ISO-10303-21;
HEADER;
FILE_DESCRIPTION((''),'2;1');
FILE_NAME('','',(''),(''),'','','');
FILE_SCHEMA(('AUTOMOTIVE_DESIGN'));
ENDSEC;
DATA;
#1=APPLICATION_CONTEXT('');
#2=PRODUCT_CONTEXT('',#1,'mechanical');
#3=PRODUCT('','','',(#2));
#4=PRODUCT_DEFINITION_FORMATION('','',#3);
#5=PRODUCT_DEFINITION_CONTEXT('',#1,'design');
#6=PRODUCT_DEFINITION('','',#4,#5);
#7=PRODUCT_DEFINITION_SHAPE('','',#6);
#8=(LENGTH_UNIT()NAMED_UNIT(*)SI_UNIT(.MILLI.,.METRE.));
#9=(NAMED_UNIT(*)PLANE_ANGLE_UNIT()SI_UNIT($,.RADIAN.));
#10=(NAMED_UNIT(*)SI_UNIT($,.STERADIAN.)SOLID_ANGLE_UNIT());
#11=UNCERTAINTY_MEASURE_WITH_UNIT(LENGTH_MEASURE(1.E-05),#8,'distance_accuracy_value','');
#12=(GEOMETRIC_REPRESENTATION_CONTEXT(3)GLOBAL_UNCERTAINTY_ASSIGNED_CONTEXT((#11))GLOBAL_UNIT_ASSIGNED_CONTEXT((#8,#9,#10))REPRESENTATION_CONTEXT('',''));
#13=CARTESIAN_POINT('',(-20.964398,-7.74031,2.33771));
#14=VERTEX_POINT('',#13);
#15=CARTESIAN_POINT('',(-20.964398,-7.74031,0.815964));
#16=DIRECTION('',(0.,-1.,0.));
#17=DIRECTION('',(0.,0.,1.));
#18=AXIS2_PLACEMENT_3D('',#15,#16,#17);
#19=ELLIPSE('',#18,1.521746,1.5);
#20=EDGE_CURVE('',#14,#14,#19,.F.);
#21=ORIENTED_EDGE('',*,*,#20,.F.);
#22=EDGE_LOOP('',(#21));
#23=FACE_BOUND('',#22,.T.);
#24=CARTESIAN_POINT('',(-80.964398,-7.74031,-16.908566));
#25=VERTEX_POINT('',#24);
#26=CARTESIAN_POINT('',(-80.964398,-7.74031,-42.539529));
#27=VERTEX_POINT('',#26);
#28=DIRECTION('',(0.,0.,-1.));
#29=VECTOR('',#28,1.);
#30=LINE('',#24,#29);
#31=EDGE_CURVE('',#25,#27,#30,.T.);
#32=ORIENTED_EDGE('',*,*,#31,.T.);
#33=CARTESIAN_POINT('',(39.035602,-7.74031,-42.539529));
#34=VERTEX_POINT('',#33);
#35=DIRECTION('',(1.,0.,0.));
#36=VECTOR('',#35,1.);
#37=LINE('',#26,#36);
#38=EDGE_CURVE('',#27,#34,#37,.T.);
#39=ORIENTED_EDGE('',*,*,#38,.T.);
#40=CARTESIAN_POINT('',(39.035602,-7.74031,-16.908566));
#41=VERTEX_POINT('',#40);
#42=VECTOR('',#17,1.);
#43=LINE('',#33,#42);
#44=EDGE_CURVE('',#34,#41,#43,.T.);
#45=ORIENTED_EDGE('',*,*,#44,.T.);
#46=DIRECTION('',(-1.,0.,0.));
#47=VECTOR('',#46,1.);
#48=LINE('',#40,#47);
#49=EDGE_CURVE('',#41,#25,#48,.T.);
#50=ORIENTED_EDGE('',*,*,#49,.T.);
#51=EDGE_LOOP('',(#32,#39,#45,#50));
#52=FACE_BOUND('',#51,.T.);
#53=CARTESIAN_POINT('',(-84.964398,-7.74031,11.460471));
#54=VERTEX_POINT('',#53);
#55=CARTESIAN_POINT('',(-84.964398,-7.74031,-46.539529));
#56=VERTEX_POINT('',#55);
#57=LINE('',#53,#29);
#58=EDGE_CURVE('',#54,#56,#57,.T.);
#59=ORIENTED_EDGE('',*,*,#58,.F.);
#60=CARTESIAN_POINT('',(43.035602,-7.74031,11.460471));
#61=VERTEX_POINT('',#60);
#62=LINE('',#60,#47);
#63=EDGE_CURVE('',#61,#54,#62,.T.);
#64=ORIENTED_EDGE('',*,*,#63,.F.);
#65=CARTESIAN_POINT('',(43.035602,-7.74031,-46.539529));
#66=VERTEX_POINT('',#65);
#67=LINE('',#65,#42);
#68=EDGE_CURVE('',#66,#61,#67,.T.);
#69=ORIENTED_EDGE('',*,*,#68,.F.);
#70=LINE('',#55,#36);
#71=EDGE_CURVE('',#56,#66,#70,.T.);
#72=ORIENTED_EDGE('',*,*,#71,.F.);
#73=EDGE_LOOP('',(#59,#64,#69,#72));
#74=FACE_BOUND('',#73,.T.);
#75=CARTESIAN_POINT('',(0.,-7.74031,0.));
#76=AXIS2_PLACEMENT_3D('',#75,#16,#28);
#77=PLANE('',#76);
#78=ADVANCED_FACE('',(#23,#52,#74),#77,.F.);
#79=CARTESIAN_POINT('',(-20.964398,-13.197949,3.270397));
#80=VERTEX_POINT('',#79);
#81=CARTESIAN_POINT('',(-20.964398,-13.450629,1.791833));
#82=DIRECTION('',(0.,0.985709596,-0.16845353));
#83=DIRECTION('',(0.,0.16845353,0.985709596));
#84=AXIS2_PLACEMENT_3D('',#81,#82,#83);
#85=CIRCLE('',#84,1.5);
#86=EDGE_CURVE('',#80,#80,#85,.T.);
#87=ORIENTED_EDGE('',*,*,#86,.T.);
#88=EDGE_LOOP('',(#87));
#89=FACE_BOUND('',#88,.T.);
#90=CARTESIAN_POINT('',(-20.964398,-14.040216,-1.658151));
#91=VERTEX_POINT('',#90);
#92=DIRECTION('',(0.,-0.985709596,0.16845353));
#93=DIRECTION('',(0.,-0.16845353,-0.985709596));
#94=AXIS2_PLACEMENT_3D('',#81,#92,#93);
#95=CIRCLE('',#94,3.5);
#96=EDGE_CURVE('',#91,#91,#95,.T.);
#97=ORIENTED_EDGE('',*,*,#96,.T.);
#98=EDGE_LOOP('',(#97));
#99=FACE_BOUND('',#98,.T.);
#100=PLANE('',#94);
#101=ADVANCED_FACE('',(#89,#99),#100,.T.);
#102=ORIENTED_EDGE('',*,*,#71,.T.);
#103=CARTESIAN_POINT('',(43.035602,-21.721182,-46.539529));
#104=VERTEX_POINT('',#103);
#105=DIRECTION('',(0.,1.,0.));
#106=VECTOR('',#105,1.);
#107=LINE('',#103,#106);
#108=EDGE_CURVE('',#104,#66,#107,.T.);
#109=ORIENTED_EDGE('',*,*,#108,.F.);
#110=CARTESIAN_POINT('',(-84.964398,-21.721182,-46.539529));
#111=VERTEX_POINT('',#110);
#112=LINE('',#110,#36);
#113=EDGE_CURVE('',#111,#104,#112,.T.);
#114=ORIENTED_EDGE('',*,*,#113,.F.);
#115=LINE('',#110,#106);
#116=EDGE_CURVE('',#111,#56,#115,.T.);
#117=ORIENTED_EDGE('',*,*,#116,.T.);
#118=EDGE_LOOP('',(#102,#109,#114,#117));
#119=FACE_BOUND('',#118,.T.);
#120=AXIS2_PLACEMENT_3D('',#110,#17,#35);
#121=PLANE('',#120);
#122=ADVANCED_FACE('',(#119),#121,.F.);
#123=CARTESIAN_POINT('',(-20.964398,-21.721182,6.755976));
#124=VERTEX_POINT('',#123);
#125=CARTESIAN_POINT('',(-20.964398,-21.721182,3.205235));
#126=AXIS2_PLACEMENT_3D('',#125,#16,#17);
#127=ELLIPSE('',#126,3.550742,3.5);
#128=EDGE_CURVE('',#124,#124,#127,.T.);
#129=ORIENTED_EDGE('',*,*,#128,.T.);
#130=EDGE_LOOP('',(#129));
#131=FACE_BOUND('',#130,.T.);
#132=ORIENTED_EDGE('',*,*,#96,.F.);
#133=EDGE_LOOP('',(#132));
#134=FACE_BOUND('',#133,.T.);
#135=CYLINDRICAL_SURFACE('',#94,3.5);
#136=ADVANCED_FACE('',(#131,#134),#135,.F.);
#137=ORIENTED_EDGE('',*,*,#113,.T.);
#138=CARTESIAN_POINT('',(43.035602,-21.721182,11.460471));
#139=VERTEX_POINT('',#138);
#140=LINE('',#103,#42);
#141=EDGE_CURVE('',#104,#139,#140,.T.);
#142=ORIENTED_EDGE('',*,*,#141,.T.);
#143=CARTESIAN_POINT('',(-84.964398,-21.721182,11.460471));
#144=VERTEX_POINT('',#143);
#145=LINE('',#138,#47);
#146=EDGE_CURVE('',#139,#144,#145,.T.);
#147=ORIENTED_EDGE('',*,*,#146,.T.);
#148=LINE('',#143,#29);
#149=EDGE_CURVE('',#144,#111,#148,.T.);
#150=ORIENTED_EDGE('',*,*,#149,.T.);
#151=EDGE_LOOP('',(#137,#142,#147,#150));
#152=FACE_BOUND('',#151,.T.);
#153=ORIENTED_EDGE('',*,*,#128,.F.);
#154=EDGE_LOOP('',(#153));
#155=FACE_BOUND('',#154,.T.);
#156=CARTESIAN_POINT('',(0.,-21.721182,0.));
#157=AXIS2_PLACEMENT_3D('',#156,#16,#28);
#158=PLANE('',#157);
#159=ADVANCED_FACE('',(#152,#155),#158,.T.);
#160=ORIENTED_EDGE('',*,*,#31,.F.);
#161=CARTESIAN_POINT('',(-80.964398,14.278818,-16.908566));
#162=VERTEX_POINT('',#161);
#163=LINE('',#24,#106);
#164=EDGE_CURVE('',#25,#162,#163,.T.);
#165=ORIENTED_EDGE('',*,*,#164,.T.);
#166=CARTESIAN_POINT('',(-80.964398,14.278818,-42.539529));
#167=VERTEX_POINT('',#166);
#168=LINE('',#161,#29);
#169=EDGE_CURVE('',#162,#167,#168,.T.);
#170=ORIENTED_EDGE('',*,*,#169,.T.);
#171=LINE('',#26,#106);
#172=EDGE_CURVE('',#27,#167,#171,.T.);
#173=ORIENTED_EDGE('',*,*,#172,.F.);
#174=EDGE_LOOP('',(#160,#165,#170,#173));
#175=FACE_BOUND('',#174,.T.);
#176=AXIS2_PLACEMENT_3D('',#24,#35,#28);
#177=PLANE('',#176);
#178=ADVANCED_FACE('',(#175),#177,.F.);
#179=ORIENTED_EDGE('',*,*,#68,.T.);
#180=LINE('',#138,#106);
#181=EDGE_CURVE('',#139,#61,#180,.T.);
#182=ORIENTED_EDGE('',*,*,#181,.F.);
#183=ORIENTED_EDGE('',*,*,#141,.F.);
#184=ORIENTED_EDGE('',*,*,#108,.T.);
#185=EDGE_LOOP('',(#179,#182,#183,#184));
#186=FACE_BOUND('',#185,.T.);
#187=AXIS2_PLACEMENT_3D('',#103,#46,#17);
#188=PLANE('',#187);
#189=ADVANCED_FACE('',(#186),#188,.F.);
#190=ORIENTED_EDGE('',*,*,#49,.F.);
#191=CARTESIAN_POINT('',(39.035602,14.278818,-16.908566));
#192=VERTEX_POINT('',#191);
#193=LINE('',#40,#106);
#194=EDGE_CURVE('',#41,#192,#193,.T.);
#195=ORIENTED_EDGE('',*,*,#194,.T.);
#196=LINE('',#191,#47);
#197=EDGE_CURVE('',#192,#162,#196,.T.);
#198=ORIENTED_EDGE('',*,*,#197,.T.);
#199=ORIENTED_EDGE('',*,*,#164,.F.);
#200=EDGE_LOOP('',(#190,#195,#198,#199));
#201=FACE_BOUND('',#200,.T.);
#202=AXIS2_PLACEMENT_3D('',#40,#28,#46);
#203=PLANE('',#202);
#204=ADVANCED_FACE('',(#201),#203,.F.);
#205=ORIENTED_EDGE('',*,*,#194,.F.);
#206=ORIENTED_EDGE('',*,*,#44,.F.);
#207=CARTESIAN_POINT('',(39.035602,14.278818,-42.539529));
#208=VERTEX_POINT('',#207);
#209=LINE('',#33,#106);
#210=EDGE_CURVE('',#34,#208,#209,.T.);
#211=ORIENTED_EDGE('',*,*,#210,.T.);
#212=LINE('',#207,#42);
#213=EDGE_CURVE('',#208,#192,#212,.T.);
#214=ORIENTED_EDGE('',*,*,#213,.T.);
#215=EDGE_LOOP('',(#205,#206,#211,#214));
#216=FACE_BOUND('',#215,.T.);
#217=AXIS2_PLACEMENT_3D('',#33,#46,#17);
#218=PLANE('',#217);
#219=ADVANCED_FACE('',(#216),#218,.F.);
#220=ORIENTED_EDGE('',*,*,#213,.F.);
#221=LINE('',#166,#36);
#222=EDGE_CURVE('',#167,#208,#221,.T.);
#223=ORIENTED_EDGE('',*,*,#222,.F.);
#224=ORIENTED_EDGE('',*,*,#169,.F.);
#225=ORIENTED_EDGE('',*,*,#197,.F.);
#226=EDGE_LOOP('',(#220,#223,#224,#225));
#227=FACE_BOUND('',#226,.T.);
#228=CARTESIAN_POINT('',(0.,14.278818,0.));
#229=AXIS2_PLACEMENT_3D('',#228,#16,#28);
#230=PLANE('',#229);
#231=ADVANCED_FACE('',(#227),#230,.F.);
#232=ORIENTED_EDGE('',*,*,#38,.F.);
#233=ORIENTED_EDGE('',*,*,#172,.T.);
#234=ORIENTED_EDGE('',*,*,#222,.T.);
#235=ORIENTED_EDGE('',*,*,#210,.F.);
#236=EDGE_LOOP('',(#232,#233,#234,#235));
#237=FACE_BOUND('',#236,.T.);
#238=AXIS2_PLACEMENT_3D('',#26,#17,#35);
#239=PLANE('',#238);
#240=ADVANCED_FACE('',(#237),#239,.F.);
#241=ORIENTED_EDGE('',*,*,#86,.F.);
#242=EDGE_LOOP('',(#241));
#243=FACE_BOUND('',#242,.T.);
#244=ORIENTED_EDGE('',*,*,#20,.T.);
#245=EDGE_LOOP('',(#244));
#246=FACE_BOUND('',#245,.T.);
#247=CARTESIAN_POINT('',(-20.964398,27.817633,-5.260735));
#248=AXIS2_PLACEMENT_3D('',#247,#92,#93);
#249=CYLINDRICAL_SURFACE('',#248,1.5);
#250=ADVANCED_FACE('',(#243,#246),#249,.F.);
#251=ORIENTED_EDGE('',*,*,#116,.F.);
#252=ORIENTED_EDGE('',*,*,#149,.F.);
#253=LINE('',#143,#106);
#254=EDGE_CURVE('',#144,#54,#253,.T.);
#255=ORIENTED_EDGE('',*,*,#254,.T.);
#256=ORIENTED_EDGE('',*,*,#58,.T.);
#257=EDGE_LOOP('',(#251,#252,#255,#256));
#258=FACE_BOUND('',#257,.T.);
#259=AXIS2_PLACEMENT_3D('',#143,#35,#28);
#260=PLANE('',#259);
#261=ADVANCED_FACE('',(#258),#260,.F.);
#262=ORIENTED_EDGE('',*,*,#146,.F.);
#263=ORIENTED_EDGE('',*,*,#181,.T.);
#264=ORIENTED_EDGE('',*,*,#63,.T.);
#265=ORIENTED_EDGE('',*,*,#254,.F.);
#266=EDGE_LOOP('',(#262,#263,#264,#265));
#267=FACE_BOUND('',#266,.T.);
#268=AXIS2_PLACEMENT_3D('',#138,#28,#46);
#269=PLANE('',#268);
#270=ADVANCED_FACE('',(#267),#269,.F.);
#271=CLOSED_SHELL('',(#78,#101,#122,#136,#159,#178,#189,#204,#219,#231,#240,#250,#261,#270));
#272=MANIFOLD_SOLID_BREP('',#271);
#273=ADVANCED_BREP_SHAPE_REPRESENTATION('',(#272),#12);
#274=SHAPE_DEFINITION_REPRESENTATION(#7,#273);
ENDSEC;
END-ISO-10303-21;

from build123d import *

# Parameters (mm, degrees)
SKETCH1_W           = 120
SKETCH1_H           = 25.630963903
BOSS_EXTRUDE1_DEPTH = 22.019128
SKETCH2_W           = 128
SKETCH2_H           = 58
BOSS_EXTRUDE2_DEPTH = 13.980872
CAVITY1_START       = -22.548845462
CAVITY1_OUTLINE_R   = 3.5
CAVITY1_DEPTH       = 8.988590673
CAVITY1_START_2     = -13.560254789
CAVITY1_2_OUTLINE_R = 1.5
CAVITY1_2_DEPTH     = 6.049448343


# Read off the part's stored shape, not the designer's step: Cavity1
with BuildPart() as part:
    # Sketch1 → Boss-Extrude1 (new body)
    with BuildSketch(Plane.XZ.offset(-14.278818257)):
        with Locations((-20.964398438, -29.724047508)):
            Rectangle(SKETCH1_W, SKETCH1_H)
    extrude(amount=BOSS_EXTRUDE1_DEPTH)


with BuildPart() as boss_extrude2_tool:
    # Sketch2 → Boss-Extrude2 (new body)
    with BuildSketch(Plane.XZ.offset(7.740310225)):
        with Locations((-20.964398438, -17.53952946)):
            Rectangle(SKETCH2_W, SKETCH2_H)
    extrude(amount=BOSS_EXTRUDE2_DEPTH)


with BuildPart() as part_1:
    add(part.part)


with BuildPart() as part_2:
    # Boss-Extrude2: joined with boss_extrude2_tool
    add(part_1.part.fuse(boss_extrude2_tool.part, tol=0.00001))

    # Cavity1 outline → Cavity1 (cut)
    with BuildSketch(Plane(origin=(0, 0, 0), x_dir=(1, 0, 0), z_dir=(0, 0.9857095962326692, -0.16845353037211303)).offset(CAVITY1_START)):
        with Locations((-20.964398438, 0.499578973)):
            Circle(CAVITY1_OUTLINE_R)
    extrude(amount=CAVITY1_DEPTH, mode=Mode.SUBTRACT)

    # Cavity1 2 outline → Cavity1 2 (cut)
    with BuildSketch(Plane(origin=(0, 0, 0), x_dir=(1, 0, 0), z_dir=(0, 0.9857095962326692, -0.16845353037211303)).offset(CAVITY1_START_2)):
        with Locations((-20.964398438, 0.499578973)):
            Circle(CAVITY1_2_OUTLINE_R)
    extrude(amount=CAVITY1_2_DEPTH, mode=Mode.SUBTRACT)


solid = part_2.part
